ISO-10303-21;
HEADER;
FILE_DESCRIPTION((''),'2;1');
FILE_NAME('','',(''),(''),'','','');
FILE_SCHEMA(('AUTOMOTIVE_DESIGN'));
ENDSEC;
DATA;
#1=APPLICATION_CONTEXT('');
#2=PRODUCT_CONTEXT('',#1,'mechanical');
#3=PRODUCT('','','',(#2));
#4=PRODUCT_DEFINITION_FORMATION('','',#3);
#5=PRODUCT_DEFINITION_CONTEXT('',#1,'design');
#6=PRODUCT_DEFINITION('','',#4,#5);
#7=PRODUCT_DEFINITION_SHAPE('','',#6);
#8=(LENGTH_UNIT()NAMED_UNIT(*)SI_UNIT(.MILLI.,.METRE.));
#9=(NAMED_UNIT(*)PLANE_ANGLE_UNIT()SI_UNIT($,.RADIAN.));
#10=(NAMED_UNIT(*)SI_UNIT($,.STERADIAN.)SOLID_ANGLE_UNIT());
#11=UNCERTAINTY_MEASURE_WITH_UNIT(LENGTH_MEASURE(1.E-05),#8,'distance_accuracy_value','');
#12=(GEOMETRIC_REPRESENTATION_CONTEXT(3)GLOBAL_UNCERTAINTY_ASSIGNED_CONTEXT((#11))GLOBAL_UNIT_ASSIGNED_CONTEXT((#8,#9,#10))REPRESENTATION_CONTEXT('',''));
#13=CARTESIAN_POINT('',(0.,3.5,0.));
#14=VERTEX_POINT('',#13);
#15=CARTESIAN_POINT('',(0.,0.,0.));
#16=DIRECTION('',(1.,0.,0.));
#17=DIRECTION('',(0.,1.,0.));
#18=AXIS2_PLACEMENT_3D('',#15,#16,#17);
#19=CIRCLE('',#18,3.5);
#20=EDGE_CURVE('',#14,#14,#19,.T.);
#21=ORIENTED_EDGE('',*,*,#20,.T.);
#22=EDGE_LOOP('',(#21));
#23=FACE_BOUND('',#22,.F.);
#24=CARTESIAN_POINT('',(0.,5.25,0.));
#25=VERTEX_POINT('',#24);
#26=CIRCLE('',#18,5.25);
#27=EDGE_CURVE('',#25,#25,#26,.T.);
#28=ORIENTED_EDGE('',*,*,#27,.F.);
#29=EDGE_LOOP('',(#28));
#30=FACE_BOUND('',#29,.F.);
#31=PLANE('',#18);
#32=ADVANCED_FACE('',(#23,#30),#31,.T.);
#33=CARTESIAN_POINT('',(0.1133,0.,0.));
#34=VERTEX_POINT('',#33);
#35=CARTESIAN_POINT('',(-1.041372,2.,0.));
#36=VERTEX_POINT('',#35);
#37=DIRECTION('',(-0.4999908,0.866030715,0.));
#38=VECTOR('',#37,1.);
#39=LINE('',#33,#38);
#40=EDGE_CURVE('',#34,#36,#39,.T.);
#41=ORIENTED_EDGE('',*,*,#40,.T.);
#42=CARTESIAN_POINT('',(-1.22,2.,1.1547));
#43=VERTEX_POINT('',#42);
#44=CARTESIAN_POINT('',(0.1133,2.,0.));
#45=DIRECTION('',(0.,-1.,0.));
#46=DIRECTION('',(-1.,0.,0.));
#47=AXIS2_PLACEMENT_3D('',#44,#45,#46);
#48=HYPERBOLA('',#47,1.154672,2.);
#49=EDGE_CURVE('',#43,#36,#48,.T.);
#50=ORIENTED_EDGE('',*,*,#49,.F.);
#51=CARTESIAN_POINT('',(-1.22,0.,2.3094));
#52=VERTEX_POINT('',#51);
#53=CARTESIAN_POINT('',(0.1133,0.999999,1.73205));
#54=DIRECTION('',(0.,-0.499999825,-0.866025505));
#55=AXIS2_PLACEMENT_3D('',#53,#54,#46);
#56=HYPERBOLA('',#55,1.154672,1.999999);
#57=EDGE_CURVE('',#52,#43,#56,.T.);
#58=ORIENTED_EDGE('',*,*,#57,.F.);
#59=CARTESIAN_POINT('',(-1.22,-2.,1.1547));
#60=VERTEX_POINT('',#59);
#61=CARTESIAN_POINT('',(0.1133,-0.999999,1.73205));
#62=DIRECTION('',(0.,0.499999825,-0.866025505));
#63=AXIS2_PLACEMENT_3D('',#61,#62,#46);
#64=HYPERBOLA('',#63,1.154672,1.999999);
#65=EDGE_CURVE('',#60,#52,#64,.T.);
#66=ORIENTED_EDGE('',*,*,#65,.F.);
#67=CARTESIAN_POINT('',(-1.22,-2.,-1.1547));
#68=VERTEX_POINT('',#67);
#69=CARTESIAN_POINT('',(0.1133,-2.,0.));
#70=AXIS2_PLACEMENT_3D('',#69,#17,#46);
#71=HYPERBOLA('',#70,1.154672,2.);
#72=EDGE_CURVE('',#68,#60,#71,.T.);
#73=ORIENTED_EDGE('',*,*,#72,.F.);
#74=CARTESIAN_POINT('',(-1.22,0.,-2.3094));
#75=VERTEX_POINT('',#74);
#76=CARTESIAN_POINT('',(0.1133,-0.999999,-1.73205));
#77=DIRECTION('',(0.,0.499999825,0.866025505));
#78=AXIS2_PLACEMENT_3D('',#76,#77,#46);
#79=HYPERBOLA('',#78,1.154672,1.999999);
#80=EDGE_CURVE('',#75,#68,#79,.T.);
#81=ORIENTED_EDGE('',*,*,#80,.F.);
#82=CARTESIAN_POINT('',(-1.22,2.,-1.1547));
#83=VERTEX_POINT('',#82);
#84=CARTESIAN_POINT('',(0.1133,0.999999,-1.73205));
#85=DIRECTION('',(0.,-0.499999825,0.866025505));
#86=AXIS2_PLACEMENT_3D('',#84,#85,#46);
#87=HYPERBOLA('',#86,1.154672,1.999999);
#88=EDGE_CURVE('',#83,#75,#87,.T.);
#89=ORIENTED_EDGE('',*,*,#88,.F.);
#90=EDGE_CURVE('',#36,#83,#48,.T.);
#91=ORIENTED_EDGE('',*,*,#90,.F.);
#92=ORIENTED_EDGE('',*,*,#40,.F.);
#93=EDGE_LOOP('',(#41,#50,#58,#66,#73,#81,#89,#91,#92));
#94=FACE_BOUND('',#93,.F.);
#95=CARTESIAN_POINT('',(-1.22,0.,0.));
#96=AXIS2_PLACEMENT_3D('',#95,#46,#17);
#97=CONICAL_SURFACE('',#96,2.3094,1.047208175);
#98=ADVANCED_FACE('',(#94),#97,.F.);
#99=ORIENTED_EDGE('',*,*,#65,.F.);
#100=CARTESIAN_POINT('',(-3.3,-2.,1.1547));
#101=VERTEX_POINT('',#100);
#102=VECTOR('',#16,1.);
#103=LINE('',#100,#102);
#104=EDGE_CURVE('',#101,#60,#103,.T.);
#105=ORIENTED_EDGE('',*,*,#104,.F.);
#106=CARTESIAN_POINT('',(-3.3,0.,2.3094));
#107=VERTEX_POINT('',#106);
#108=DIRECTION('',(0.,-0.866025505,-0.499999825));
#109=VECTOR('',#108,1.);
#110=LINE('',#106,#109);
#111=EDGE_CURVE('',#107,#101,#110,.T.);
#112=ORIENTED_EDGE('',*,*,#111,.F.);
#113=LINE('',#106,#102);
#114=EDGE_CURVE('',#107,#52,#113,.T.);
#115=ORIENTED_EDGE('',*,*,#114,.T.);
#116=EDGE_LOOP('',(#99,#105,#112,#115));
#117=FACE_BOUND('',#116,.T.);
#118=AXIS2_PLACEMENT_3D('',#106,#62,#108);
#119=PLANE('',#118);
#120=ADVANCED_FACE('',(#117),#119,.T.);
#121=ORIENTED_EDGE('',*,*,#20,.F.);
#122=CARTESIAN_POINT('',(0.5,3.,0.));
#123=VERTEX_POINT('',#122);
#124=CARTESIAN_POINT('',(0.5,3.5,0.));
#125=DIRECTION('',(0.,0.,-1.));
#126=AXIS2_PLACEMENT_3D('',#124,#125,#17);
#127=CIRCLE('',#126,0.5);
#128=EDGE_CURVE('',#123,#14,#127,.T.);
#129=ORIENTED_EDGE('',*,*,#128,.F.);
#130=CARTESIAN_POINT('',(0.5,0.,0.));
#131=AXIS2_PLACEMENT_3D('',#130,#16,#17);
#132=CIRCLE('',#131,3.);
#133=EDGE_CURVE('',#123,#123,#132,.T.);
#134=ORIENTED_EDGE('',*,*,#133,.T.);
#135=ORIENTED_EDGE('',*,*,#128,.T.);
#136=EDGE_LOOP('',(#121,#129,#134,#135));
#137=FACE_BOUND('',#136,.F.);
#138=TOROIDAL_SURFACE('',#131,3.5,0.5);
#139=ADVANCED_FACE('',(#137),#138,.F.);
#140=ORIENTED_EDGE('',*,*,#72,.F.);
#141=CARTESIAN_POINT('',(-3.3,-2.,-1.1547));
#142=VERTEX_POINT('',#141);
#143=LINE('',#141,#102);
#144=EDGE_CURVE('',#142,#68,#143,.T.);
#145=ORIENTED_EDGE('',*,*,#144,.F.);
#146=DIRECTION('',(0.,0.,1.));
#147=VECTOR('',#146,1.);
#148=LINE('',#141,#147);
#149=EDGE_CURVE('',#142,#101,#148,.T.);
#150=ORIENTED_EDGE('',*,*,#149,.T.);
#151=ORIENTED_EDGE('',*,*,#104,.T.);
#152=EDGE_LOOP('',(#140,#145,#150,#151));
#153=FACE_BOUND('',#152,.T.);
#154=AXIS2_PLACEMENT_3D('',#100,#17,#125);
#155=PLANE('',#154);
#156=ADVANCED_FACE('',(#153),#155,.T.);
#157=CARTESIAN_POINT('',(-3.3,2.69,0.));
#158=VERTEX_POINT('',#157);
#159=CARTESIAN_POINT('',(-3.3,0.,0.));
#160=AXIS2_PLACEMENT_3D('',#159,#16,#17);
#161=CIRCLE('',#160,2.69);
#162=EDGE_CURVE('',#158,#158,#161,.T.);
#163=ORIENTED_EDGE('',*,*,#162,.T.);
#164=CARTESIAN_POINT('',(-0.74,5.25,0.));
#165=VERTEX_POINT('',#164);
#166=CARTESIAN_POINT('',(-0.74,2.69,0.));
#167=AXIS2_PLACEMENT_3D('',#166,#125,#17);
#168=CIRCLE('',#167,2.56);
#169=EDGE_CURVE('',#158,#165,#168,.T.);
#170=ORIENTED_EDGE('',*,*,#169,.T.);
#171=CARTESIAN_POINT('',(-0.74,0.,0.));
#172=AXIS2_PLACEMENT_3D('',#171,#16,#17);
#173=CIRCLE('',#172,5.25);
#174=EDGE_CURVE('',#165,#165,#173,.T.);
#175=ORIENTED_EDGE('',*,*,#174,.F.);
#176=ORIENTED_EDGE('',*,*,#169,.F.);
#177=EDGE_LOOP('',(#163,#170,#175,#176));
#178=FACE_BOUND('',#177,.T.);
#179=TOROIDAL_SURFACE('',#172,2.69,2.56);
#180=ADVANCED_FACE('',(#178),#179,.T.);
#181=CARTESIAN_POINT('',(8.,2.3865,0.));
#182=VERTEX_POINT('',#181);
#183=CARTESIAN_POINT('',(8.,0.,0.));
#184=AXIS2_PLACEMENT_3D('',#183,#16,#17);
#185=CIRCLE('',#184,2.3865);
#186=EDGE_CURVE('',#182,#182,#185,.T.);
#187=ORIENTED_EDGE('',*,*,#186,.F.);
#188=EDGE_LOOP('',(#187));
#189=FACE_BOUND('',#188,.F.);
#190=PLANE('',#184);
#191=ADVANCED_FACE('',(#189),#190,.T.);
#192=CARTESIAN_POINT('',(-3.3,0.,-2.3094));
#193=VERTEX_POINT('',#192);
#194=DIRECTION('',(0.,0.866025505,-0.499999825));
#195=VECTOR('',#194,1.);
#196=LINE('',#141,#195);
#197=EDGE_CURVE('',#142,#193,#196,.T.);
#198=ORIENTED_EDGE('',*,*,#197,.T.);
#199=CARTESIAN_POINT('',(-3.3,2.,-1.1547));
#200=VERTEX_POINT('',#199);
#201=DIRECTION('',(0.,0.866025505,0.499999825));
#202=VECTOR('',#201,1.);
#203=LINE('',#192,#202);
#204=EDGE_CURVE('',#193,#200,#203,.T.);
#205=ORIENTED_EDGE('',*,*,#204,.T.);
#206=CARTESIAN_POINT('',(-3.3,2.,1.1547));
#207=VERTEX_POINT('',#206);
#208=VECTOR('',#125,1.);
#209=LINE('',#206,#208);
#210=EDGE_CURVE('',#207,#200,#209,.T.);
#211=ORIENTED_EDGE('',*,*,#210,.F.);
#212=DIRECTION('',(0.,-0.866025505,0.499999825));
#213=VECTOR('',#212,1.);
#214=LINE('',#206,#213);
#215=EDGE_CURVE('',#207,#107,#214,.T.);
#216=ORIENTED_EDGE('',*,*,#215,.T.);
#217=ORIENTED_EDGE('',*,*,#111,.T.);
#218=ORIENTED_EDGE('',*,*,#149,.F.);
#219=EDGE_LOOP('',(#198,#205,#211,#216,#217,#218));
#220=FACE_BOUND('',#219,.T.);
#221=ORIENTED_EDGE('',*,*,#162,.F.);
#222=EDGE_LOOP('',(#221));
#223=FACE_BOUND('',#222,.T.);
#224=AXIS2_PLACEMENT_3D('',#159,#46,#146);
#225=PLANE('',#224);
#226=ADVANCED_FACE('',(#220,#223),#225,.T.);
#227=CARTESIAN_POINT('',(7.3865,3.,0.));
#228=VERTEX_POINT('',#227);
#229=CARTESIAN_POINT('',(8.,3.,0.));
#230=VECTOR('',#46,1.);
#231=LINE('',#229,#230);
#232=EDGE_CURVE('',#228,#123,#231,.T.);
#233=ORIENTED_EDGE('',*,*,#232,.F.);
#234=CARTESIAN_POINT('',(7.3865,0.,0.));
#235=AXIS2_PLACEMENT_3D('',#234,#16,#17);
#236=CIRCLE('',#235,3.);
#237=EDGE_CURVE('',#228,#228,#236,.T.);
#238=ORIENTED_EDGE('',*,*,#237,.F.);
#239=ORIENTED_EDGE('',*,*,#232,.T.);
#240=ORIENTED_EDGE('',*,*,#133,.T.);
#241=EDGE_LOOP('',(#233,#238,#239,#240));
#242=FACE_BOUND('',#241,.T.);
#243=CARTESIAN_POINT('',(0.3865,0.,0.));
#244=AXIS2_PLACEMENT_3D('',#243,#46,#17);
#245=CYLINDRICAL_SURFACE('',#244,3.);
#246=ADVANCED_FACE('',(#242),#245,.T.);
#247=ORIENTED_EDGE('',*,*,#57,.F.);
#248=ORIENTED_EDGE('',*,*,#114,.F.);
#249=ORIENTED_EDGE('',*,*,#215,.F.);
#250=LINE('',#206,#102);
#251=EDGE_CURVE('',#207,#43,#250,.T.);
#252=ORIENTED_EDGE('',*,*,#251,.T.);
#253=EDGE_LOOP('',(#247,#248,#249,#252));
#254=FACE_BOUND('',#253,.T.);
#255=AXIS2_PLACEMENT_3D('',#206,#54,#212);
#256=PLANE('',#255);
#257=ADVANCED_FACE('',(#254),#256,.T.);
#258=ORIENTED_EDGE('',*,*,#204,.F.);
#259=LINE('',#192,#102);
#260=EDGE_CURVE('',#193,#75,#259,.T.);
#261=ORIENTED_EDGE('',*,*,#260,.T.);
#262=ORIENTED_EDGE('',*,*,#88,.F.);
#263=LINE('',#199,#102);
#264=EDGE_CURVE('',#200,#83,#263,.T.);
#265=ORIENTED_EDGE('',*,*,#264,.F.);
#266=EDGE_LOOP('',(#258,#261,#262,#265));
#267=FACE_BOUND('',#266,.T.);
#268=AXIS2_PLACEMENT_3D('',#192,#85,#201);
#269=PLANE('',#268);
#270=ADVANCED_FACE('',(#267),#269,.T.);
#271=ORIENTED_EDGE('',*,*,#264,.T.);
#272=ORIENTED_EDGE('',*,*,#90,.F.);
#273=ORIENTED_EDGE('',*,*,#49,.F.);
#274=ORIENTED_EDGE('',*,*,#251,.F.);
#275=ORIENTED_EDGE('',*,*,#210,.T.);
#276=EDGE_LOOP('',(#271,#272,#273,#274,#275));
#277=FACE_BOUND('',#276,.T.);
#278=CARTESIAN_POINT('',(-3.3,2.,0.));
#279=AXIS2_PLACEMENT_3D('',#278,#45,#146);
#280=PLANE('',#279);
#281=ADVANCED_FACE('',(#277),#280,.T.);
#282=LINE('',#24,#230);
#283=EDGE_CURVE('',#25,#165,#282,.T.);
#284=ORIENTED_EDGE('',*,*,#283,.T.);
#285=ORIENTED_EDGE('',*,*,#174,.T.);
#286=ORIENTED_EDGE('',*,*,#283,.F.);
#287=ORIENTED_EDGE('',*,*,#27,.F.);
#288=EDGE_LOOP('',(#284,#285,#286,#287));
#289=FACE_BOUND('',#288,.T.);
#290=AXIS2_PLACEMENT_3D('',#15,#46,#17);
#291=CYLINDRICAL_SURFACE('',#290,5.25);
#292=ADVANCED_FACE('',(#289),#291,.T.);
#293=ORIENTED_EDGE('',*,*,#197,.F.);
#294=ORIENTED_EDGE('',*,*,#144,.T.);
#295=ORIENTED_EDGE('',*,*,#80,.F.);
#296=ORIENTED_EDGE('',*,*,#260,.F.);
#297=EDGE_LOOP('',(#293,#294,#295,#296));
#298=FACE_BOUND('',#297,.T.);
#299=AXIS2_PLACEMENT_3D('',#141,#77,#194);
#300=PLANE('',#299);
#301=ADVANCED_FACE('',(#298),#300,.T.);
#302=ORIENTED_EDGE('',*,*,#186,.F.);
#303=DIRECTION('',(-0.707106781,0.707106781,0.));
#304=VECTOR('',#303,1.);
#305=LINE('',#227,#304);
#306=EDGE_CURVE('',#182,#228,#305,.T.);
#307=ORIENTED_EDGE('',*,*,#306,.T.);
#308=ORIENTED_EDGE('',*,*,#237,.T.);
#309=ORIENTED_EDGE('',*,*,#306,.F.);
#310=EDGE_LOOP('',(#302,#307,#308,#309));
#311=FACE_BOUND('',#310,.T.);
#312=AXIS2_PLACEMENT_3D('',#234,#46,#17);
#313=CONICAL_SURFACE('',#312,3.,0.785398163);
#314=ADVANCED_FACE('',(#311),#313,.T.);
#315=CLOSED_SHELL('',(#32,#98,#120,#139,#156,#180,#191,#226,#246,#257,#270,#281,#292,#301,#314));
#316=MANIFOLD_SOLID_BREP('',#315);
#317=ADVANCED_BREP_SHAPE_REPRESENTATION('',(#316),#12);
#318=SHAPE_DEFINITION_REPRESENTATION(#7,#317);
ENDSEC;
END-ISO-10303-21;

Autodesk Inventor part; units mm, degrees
ref_plane "YZ Plane" through (0, 0, 0) normal (1, 0, 0) x (0, 1, 0)
ref_plane "XZ Plane" through (0, 0, 0) normal (0, 1, 0) x (-1, 0, 0)
sketch "Sketch1" plane through (0, 0, 0) normal (0, 0, 1) x (1, 0, 0)
  line L0 (0.1133, 0) -> (8, 0)
  line L1 (8, 0) -> (8, 3)
  line L2 (8, 3) -> (1, 3)
  line L3 (1, 3) -> (0.3865, 3)
  line L4 (0.3865, 3) -> (0, 3)
  line L5 (0, 3) -> (0, 5.25)
  line L6 (0, 5.25) -> (-3.3, 5.25)
  line L7 (-3.3, 5.25) -> (-3.3, 2.3094)
  line L8 (-3.3, 2.3094) -> (-1.22, 2.3094)
  line L9 (-1.22, 2.3094) -> (0.1133, 0)
  line L10 (-5.56, 0) -> (10.26, 0) projected
  line L11 (0, -1.05) -> (0, 6.3) projected
  line L12 (1, 3) -> (0, 3) construction
  dimension "d1" = 7
  dimension "d2" = 0.6136
  dimension "d3" = 3.3
  dimension "d4" = 2.08
  dimension "d5" = 60
  dimension "d6" = 6
  dimension "d7" = 6
  dimension "d8" = 4.6188
  dimension "d9" = 10.5
  dimension "d26" = 8
revolve "Body" add sketch "Sketch1" angle 360 about axis through (0.1133, 0, 0) along (1, 0, 0) contours L9 L11 L4 L3 L2 L1 L0 | L9 L8 L7 L6 L5 L11
sketch "Sketch2" plane through (-3.3, 0, 0) normal (-1, 0, 0) x (0, 0, 1)
  circle A0 centre (0, 0) radius 2.3094 projected
  line L0 (0, -7.35) -> (0, 7.35) projected
  line L1 (-7.35, 0) -> (7.35, 0) projected
  line L2 (2.3094, 0) -> (1.1547, -2)
  line L3 (1.1547, -2) -> (-1.1547, -2)
  line L4 (-1.1547, -2) -> (-2.3094, 0)
  line L5 (-2.3094, 0) -> (-1.1547, 2)
  line L6 (-1.1547, 2) -> (1.1547, 2)
  line L7 (1.1547, 2) -> (2.3094, 0)
extrude "Slot" add sketch "Sketch2" against normal up to next contours L7 A0 | A0 L2 | L6 L0 A0 | A0 L0 L3 | L0 L6 A0 | A0 L3 L0 | L4 A0 | A0 L5
fillet "Fillet1" radius 2.56 1 edges at (-3.3, -5.25, 0)
thread "Thread" size "M6x1" class "6g" standard "ISO Metric profile" length 7
chamfer "Chamfer1" distance 0.6135 distance2 0.6135 1 edges at (8, -3, 0) measured on face at (8, 0.705, 0.3049)
ref_plane "Work Plane1" through (29, 0, 0) normal (0, -1, 0) x (1, 0, 0)
fillet "Fillet2" radius 0.5 1 edges at (0, -3, 0)
equation "\"d30\" = R"
equation "\"d17\" = RR"
equation "\"d13\" = GEL"
equation "\"d15\" = -0.5 * SPD + 0.5 * GD"
equation "\"d16\" = GUL"
equation "\"d1\" = GEL"
equation "\"d3\" = KOH"
equation "\"d4\" = INTI"
equation "\"d6\" = GD"
equation "\"d7\" = BDM"
equation "\"d8\" = 1.1547 * SW"
equation "\"d9\" = KOD"
equation "\"GD\" = NND"
equation "\"GEL\" = 7"
equation "\"KOD\" = 10.5"
equation "\"KOH\" = 3.3"
equation "\"INTI\" = 2.08"
equation "\"GAL\" = 0.61345 * PTC"
equation "\"GUL\" = 0.61345 * PTC"
equation "\"BDM\" = NND"
equation "\"SW\" = 4"
equation "\"RR\" = 2.56"
equation "\"SPD\" = NND - 1.2269 * PTC"
equation "\"R\" = 0.5"
equation "\"TOA\" = 30deg"
equation "\"GD1\" = THREADDIA - 1.2269 * PTC"
equation "\"THREADDIA\" = 6"
equation "\"PTC\" = 1"
equation "\"NND\" = 6"
equation "\"KOH1\" = 0.74"
equation "\"E0\" = 4.583"
properties part number "ISO 7380-1 - M6 x 10" material "Steel"
